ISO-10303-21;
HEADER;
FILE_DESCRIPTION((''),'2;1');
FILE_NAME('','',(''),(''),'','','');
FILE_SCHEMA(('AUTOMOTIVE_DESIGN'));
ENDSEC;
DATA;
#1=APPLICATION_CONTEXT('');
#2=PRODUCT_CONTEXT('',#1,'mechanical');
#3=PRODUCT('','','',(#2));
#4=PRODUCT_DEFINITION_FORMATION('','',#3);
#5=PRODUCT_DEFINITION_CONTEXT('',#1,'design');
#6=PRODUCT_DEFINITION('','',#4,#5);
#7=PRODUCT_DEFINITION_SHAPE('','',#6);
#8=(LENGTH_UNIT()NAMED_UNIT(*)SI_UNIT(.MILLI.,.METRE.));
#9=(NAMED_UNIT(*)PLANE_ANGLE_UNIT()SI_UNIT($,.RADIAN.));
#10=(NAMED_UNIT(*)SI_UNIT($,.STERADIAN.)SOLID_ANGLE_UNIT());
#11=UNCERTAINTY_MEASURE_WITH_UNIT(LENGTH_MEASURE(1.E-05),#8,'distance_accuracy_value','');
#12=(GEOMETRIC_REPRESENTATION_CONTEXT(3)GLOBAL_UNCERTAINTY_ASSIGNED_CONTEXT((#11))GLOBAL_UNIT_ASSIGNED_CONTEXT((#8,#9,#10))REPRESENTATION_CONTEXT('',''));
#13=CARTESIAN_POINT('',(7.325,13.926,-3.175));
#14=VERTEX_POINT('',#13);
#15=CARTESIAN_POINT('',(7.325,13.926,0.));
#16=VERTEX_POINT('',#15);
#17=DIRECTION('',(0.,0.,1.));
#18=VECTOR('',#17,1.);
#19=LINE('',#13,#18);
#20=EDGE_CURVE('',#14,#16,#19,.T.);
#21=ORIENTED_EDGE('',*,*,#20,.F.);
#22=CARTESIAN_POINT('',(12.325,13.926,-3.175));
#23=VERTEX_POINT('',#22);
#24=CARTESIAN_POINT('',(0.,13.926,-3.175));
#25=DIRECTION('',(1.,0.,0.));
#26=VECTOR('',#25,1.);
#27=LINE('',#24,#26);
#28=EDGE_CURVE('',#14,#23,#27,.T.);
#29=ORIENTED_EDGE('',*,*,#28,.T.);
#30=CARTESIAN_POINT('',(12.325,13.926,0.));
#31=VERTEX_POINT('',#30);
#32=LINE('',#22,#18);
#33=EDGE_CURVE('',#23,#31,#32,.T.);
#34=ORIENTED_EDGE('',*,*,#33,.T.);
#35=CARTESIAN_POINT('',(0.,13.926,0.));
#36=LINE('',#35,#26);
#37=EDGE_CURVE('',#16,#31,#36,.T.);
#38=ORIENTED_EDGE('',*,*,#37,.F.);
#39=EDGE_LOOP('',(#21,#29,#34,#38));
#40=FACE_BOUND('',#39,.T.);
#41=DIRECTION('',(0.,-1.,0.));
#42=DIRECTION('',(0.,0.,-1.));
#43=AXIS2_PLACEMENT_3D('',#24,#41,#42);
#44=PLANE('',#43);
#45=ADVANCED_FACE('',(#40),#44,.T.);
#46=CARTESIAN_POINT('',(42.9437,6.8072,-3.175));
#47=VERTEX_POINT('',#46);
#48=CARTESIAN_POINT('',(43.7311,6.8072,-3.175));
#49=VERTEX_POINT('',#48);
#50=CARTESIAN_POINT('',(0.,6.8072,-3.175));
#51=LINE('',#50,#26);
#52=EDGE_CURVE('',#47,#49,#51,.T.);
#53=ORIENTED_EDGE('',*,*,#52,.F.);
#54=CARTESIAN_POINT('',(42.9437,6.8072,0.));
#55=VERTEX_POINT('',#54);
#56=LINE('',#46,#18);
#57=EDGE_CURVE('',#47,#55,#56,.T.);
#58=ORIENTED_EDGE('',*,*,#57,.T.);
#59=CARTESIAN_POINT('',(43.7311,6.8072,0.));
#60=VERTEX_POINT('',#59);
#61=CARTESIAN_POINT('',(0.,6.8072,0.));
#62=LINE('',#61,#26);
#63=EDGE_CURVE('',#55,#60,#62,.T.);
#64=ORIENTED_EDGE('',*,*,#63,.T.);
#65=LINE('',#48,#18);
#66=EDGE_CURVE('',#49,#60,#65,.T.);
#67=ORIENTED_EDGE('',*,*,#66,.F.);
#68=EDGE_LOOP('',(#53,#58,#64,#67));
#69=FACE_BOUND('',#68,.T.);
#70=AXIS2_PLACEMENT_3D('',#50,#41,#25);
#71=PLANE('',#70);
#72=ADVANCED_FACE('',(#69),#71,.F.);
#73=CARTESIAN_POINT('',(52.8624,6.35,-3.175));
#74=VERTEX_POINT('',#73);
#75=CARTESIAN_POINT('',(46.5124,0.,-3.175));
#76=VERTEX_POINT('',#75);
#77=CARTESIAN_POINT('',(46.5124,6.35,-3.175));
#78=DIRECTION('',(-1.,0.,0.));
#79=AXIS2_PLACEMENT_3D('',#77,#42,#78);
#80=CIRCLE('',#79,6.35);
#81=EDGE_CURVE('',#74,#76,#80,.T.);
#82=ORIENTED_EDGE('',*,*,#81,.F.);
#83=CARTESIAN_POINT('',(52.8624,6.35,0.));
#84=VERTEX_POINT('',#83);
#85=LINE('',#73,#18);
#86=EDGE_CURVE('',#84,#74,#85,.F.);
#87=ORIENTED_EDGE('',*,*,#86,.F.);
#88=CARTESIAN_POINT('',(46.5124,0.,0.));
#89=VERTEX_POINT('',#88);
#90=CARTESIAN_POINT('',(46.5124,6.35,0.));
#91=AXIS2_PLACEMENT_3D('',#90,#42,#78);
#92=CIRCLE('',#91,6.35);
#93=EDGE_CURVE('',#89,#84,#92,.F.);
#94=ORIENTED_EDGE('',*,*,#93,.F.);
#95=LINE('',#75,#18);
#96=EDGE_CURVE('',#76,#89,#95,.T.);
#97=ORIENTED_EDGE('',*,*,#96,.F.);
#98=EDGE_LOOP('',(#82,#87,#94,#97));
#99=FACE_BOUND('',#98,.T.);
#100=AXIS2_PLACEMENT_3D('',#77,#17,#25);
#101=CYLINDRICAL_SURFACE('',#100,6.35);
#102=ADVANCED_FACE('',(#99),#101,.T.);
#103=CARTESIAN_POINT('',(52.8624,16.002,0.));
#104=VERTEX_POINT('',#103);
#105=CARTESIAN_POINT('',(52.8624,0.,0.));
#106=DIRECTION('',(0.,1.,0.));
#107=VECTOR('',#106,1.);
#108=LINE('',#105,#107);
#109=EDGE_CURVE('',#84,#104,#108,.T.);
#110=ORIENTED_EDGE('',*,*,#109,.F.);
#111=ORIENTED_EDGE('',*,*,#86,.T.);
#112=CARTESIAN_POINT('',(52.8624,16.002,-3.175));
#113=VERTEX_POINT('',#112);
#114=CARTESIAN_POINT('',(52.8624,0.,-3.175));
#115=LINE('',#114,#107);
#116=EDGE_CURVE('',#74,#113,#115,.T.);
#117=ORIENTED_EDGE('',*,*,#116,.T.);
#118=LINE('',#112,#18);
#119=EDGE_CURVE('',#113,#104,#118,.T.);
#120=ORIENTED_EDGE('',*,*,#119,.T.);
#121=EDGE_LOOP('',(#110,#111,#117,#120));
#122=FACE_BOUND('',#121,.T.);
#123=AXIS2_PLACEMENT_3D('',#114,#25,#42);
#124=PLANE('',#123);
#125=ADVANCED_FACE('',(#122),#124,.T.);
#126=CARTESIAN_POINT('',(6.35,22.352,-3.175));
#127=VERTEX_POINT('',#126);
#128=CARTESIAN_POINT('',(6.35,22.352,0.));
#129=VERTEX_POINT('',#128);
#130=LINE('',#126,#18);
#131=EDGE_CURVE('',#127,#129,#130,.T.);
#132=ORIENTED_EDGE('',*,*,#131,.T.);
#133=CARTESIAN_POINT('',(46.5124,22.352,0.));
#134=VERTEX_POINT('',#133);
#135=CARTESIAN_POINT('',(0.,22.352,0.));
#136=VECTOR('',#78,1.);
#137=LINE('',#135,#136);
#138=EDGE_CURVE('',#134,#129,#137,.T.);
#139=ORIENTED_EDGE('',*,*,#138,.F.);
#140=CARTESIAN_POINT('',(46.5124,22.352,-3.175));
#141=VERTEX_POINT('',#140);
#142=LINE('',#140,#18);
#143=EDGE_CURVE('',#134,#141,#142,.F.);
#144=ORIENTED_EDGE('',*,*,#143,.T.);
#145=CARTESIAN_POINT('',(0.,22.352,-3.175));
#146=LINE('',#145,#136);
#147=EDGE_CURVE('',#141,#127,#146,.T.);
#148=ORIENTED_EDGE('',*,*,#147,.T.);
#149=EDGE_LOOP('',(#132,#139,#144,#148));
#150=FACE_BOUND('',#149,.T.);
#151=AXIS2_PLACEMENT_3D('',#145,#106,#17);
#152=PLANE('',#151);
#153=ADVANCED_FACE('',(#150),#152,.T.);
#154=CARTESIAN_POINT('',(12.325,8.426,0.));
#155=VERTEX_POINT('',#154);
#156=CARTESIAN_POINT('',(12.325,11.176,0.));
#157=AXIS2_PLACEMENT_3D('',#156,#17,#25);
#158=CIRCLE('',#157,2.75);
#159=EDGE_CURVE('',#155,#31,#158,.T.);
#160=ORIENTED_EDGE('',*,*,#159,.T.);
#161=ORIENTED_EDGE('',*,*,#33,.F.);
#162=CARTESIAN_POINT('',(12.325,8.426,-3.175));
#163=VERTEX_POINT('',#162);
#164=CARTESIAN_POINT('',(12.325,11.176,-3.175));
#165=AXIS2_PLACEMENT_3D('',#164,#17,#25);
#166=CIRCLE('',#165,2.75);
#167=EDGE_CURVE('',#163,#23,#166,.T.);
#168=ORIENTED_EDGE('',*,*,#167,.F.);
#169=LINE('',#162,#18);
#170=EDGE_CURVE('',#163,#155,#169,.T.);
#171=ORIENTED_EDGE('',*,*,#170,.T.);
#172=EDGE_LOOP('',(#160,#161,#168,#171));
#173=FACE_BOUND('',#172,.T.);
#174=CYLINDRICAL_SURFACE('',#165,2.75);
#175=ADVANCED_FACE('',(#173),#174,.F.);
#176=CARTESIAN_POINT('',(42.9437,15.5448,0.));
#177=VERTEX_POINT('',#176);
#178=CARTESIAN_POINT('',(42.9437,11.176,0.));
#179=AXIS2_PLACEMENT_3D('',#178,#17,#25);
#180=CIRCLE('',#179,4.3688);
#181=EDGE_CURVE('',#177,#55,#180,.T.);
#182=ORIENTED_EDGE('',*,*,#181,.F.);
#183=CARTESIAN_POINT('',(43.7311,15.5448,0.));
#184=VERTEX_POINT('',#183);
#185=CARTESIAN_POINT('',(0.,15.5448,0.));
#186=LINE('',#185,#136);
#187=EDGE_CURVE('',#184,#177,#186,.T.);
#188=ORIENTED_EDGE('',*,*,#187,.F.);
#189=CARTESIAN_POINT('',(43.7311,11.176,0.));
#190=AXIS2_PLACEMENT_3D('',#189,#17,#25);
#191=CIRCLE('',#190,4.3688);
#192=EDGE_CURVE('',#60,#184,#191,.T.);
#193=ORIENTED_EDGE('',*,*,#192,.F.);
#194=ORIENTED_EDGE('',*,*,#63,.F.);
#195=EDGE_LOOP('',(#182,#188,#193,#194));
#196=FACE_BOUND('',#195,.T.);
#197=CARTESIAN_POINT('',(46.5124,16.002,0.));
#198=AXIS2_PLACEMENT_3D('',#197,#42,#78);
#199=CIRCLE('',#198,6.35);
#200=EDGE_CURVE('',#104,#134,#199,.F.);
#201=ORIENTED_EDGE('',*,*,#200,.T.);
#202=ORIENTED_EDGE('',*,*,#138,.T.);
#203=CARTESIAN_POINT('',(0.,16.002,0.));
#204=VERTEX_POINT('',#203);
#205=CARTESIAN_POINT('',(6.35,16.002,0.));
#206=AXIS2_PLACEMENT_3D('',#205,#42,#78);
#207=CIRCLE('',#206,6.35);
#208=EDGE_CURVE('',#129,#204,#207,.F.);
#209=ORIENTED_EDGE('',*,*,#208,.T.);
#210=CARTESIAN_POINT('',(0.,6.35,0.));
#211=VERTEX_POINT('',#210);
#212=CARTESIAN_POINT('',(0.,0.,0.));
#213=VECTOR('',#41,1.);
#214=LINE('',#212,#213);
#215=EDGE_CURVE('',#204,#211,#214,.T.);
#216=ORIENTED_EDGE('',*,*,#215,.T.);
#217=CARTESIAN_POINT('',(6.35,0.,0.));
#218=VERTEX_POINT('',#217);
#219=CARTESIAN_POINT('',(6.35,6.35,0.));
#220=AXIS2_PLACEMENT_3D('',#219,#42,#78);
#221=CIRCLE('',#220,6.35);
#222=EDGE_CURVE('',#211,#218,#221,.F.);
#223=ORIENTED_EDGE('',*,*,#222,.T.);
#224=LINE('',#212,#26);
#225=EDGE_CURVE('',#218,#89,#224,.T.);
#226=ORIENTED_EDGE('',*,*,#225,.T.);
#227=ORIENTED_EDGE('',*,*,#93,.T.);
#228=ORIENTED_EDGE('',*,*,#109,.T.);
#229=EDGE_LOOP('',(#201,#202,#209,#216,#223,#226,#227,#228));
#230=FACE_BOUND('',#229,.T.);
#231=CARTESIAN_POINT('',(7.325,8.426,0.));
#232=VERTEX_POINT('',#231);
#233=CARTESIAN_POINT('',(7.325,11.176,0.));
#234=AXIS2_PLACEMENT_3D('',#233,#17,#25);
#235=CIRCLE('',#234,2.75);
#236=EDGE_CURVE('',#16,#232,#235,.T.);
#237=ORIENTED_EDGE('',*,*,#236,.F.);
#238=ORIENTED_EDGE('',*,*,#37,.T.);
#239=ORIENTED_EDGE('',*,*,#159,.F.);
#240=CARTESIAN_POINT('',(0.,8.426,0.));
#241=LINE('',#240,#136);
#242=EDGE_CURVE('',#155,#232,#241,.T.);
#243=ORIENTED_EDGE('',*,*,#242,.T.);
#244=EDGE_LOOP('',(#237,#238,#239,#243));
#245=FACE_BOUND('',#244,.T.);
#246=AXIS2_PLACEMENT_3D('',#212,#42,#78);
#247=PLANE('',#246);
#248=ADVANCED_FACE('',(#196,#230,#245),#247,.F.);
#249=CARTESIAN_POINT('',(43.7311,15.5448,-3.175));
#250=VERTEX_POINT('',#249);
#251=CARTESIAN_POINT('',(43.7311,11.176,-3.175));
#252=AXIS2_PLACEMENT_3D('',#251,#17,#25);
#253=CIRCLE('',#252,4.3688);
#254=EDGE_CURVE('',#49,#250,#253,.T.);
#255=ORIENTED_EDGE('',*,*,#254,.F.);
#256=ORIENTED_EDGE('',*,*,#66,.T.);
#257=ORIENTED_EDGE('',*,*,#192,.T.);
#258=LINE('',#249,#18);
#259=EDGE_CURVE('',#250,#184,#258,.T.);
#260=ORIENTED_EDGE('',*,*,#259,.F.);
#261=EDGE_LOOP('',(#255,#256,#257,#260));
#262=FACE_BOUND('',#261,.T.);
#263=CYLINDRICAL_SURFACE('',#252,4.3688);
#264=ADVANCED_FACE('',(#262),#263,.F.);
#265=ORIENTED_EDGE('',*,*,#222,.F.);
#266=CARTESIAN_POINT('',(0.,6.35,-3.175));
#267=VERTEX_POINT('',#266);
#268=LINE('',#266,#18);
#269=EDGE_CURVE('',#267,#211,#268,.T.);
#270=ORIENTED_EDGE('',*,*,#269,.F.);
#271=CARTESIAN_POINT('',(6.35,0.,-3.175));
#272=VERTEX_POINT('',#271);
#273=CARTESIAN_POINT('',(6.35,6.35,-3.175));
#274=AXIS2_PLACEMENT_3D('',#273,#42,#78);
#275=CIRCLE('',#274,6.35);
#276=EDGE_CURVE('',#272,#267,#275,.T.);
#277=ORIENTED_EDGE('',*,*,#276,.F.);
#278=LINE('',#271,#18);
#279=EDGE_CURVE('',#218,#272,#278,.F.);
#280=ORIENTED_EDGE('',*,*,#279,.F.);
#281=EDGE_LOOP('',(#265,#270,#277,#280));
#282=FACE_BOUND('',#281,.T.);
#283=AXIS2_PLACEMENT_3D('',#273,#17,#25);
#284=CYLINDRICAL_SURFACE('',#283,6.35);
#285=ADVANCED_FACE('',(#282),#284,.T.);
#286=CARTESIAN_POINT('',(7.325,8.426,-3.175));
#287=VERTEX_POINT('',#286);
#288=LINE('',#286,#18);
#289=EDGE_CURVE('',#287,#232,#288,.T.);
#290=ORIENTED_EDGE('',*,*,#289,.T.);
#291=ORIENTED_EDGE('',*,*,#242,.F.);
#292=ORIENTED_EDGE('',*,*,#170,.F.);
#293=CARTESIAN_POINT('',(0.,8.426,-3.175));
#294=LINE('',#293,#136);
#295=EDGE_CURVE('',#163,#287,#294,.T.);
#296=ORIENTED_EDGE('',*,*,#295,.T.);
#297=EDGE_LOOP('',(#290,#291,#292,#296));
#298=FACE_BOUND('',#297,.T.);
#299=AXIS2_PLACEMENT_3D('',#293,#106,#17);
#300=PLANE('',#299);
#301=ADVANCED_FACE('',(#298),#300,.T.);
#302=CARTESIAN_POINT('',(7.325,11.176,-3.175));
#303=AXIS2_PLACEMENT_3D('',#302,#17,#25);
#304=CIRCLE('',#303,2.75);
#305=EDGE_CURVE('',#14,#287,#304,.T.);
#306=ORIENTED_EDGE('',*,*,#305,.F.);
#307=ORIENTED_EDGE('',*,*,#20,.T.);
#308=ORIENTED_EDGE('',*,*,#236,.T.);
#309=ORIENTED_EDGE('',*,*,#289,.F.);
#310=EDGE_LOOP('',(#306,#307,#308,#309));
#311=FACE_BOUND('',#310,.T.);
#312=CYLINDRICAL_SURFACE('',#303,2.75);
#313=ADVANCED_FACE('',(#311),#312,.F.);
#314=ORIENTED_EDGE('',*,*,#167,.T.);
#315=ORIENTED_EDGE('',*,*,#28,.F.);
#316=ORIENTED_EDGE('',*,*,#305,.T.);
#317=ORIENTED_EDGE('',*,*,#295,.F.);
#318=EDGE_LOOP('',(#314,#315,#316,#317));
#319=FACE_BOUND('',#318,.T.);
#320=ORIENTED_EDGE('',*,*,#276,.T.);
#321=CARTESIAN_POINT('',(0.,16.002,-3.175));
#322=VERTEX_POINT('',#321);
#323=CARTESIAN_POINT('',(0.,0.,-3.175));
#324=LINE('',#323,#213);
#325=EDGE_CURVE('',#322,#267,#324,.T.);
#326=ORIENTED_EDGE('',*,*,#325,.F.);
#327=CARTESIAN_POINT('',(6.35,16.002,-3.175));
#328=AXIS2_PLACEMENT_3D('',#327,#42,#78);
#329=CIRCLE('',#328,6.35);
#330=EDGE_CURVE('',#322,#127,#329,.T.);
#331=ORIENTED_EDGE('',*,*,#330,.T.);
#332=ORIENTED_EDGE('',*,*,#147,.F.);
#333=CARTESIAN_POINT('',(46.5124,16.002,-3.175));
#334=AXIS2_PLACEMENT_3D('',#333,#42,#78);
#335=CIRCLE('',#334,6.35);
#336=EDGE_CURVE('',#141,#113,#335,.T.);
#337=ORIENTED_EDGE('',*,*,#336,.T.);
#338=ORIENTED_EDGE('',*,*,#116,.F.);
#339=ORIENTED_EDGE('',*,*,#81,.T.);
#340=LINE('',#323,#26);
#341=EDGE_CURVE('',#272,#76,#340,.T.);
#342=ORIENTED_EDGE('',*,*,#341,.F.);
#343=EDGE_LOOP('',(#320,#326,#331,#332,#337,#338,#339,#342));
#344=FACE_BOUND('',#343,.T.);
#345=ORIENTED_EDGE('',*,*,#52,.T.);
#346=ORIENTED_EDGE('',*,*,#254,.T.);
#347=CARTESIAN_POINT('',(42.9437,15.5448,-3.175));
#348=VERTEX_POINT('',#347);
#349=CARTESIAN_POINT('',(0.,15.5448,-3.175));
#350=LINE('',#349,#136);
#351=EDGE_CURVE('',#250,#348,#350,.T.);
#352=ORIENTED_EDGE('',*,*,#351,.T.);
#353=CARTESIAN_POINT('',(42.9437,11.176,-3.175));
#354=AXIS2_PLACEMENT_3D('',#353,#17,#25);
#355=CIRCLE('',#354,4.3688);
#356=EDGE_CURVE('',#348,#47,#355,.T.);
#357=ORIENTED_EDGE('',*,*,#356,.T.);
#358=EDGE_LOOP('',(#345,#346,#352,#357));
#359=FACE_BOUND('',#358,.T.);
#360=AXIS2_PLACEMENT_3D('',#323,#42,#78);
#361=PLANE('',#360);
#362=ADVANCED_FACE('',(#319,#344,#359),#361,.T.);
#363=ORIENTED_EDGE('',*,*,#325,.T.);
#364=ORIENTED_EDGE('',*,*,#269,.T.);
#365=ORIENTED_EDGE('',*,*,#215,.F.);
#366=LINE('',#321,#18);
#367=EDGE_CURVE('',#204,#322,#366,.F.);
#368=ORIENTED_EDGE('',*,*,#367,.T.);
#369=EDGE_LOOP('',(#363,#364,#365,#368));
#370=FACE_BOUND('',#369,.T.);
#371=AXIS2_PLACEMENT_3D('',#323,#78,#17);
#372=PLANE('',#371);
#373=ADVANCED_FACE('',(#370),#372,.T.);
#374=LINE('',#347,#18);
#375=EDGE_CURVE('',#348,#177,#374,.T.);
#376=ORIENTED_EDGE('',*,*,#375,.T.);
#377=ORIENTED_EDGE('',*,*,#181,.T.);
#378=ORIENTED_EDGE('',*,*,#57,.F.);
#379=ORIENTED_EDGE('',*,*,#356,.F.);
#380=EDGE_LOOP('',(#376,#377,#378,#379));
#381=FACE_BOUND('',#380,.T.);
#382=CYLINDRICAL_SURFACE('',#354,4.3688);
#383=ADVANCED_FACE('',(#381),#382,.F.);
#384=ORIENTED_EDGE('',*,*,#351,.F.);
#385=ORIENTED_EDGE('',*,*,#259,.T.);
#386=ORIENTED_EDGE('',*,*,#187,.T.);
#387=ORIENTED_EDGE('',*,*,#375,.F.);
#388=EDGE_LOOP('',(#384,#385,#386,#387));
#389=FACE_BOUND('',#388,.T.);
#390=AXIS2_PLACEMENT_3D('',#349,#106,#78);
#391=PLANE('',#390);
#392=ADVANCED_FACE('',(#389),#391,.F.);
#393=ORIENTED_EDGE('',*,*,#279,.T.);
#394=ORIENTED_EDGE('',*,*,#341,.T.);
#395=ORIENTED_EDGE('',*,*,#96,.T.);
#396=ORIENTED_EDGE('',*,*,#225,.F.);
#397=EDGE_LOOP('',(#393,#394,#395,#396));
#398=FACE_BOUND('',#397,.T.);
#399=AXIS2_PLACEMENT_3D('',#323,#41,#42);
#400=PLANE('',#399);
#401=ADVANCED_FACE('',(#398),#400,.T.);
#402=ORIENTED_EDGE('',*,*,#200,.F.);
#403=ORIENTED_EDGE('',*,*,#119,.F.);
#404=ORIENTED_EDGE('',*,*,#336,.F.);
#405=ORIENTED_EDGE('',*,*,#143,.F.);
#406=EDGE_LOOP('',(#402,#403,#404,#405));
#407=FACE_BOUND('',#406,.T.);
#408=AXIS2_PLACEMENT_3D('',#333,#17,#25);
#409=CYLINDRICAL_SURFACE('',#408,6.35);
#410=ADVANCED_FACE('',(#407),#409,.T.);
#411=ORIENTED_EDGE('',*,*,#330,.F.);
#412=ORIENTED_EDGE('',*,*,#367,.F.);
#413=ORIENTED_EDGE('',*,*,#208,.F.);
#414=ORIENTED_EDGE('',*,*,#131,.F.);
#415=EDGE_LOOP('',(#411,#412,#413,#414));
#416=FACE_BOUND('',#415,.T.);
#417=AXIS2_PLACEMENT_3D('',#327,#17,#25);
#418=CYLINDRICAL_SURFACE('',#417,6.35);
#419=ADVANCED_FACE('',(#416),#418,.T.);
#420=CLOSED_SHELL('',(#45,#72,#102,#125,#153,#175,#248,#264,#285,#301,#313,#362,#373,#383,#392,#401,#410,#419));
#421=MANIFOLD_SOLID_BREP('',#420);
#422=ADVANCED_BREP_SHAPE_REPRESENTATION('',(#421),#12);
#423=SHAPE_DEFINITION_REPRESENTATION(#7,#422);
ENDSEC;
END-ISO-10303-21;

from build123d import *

# Parameters (mm, degrees)
SKETCH1_W          = 52.8624
SKETCH1_H          = 22.352
BASE_FLANGE1_DEPTH = 3.175
CUT_EXTRUDE1_DEPTH = 3.175
FILLET1_R          = 6.35


# Sheet-metal steps are written as plain solids
with BuildPart() as part:
    # Sketch1 → Base-Flange1 (new body)
    with BuildSketch(Plane.XY):
        with Locations((26.4312, 11.176)):
            Rectangle(SKETCH1_W, SKETCH1_H)
    extrude(amount=-BASE_FLANGE1_DEPTH)

    # Sketch6 → Cut-Extrude1 (cut)
    with BuildSketch(Plane.XY):
        with BuildLine():
            Line((7.325, 13.926), (12.325, 13.926))
            ThreePointArc((12.325, 13.926), (15.075, 11.176), (12.325, 8.426))
            Line((12.325, 8.426), (7.325, 8.426))
            ThreePointArc((7.325, 8.426), (4.575, 11.176), (7.325, 13.926))
        make_face()
        with BuildLine():
            Line((42.9437, 6.8072), (43.7311, 6.8072))
            ThreePointArc((43.7311, 6.8072), (48.0999, 11.176), (43.7311, 15.5448))
            Line((43.7311, 15.5448), (42.9437, 15.5448))
            ThreePointArc((42.9437, 15.5448), (38.5749, 11.176), (42.9437, 6.8072))
        make_face()
    extrude(amount=-CUT_EXTRUDE1_DEPTH, mode=Mode.SUBTRACT)

    # Fillet1
    fillet1_edges = [part.edges().sort_by_distance(p)[0] for p in [
        (0, 22.352, -1.5875),
        (52.8624, 22.352, -1.5875),
        (52.8624, 0, -1.5875),
        (0, 0, -1.5875),
    ]]
    fillet(fillet1_edges, radius=FILLET1_R)


solid = part.part
